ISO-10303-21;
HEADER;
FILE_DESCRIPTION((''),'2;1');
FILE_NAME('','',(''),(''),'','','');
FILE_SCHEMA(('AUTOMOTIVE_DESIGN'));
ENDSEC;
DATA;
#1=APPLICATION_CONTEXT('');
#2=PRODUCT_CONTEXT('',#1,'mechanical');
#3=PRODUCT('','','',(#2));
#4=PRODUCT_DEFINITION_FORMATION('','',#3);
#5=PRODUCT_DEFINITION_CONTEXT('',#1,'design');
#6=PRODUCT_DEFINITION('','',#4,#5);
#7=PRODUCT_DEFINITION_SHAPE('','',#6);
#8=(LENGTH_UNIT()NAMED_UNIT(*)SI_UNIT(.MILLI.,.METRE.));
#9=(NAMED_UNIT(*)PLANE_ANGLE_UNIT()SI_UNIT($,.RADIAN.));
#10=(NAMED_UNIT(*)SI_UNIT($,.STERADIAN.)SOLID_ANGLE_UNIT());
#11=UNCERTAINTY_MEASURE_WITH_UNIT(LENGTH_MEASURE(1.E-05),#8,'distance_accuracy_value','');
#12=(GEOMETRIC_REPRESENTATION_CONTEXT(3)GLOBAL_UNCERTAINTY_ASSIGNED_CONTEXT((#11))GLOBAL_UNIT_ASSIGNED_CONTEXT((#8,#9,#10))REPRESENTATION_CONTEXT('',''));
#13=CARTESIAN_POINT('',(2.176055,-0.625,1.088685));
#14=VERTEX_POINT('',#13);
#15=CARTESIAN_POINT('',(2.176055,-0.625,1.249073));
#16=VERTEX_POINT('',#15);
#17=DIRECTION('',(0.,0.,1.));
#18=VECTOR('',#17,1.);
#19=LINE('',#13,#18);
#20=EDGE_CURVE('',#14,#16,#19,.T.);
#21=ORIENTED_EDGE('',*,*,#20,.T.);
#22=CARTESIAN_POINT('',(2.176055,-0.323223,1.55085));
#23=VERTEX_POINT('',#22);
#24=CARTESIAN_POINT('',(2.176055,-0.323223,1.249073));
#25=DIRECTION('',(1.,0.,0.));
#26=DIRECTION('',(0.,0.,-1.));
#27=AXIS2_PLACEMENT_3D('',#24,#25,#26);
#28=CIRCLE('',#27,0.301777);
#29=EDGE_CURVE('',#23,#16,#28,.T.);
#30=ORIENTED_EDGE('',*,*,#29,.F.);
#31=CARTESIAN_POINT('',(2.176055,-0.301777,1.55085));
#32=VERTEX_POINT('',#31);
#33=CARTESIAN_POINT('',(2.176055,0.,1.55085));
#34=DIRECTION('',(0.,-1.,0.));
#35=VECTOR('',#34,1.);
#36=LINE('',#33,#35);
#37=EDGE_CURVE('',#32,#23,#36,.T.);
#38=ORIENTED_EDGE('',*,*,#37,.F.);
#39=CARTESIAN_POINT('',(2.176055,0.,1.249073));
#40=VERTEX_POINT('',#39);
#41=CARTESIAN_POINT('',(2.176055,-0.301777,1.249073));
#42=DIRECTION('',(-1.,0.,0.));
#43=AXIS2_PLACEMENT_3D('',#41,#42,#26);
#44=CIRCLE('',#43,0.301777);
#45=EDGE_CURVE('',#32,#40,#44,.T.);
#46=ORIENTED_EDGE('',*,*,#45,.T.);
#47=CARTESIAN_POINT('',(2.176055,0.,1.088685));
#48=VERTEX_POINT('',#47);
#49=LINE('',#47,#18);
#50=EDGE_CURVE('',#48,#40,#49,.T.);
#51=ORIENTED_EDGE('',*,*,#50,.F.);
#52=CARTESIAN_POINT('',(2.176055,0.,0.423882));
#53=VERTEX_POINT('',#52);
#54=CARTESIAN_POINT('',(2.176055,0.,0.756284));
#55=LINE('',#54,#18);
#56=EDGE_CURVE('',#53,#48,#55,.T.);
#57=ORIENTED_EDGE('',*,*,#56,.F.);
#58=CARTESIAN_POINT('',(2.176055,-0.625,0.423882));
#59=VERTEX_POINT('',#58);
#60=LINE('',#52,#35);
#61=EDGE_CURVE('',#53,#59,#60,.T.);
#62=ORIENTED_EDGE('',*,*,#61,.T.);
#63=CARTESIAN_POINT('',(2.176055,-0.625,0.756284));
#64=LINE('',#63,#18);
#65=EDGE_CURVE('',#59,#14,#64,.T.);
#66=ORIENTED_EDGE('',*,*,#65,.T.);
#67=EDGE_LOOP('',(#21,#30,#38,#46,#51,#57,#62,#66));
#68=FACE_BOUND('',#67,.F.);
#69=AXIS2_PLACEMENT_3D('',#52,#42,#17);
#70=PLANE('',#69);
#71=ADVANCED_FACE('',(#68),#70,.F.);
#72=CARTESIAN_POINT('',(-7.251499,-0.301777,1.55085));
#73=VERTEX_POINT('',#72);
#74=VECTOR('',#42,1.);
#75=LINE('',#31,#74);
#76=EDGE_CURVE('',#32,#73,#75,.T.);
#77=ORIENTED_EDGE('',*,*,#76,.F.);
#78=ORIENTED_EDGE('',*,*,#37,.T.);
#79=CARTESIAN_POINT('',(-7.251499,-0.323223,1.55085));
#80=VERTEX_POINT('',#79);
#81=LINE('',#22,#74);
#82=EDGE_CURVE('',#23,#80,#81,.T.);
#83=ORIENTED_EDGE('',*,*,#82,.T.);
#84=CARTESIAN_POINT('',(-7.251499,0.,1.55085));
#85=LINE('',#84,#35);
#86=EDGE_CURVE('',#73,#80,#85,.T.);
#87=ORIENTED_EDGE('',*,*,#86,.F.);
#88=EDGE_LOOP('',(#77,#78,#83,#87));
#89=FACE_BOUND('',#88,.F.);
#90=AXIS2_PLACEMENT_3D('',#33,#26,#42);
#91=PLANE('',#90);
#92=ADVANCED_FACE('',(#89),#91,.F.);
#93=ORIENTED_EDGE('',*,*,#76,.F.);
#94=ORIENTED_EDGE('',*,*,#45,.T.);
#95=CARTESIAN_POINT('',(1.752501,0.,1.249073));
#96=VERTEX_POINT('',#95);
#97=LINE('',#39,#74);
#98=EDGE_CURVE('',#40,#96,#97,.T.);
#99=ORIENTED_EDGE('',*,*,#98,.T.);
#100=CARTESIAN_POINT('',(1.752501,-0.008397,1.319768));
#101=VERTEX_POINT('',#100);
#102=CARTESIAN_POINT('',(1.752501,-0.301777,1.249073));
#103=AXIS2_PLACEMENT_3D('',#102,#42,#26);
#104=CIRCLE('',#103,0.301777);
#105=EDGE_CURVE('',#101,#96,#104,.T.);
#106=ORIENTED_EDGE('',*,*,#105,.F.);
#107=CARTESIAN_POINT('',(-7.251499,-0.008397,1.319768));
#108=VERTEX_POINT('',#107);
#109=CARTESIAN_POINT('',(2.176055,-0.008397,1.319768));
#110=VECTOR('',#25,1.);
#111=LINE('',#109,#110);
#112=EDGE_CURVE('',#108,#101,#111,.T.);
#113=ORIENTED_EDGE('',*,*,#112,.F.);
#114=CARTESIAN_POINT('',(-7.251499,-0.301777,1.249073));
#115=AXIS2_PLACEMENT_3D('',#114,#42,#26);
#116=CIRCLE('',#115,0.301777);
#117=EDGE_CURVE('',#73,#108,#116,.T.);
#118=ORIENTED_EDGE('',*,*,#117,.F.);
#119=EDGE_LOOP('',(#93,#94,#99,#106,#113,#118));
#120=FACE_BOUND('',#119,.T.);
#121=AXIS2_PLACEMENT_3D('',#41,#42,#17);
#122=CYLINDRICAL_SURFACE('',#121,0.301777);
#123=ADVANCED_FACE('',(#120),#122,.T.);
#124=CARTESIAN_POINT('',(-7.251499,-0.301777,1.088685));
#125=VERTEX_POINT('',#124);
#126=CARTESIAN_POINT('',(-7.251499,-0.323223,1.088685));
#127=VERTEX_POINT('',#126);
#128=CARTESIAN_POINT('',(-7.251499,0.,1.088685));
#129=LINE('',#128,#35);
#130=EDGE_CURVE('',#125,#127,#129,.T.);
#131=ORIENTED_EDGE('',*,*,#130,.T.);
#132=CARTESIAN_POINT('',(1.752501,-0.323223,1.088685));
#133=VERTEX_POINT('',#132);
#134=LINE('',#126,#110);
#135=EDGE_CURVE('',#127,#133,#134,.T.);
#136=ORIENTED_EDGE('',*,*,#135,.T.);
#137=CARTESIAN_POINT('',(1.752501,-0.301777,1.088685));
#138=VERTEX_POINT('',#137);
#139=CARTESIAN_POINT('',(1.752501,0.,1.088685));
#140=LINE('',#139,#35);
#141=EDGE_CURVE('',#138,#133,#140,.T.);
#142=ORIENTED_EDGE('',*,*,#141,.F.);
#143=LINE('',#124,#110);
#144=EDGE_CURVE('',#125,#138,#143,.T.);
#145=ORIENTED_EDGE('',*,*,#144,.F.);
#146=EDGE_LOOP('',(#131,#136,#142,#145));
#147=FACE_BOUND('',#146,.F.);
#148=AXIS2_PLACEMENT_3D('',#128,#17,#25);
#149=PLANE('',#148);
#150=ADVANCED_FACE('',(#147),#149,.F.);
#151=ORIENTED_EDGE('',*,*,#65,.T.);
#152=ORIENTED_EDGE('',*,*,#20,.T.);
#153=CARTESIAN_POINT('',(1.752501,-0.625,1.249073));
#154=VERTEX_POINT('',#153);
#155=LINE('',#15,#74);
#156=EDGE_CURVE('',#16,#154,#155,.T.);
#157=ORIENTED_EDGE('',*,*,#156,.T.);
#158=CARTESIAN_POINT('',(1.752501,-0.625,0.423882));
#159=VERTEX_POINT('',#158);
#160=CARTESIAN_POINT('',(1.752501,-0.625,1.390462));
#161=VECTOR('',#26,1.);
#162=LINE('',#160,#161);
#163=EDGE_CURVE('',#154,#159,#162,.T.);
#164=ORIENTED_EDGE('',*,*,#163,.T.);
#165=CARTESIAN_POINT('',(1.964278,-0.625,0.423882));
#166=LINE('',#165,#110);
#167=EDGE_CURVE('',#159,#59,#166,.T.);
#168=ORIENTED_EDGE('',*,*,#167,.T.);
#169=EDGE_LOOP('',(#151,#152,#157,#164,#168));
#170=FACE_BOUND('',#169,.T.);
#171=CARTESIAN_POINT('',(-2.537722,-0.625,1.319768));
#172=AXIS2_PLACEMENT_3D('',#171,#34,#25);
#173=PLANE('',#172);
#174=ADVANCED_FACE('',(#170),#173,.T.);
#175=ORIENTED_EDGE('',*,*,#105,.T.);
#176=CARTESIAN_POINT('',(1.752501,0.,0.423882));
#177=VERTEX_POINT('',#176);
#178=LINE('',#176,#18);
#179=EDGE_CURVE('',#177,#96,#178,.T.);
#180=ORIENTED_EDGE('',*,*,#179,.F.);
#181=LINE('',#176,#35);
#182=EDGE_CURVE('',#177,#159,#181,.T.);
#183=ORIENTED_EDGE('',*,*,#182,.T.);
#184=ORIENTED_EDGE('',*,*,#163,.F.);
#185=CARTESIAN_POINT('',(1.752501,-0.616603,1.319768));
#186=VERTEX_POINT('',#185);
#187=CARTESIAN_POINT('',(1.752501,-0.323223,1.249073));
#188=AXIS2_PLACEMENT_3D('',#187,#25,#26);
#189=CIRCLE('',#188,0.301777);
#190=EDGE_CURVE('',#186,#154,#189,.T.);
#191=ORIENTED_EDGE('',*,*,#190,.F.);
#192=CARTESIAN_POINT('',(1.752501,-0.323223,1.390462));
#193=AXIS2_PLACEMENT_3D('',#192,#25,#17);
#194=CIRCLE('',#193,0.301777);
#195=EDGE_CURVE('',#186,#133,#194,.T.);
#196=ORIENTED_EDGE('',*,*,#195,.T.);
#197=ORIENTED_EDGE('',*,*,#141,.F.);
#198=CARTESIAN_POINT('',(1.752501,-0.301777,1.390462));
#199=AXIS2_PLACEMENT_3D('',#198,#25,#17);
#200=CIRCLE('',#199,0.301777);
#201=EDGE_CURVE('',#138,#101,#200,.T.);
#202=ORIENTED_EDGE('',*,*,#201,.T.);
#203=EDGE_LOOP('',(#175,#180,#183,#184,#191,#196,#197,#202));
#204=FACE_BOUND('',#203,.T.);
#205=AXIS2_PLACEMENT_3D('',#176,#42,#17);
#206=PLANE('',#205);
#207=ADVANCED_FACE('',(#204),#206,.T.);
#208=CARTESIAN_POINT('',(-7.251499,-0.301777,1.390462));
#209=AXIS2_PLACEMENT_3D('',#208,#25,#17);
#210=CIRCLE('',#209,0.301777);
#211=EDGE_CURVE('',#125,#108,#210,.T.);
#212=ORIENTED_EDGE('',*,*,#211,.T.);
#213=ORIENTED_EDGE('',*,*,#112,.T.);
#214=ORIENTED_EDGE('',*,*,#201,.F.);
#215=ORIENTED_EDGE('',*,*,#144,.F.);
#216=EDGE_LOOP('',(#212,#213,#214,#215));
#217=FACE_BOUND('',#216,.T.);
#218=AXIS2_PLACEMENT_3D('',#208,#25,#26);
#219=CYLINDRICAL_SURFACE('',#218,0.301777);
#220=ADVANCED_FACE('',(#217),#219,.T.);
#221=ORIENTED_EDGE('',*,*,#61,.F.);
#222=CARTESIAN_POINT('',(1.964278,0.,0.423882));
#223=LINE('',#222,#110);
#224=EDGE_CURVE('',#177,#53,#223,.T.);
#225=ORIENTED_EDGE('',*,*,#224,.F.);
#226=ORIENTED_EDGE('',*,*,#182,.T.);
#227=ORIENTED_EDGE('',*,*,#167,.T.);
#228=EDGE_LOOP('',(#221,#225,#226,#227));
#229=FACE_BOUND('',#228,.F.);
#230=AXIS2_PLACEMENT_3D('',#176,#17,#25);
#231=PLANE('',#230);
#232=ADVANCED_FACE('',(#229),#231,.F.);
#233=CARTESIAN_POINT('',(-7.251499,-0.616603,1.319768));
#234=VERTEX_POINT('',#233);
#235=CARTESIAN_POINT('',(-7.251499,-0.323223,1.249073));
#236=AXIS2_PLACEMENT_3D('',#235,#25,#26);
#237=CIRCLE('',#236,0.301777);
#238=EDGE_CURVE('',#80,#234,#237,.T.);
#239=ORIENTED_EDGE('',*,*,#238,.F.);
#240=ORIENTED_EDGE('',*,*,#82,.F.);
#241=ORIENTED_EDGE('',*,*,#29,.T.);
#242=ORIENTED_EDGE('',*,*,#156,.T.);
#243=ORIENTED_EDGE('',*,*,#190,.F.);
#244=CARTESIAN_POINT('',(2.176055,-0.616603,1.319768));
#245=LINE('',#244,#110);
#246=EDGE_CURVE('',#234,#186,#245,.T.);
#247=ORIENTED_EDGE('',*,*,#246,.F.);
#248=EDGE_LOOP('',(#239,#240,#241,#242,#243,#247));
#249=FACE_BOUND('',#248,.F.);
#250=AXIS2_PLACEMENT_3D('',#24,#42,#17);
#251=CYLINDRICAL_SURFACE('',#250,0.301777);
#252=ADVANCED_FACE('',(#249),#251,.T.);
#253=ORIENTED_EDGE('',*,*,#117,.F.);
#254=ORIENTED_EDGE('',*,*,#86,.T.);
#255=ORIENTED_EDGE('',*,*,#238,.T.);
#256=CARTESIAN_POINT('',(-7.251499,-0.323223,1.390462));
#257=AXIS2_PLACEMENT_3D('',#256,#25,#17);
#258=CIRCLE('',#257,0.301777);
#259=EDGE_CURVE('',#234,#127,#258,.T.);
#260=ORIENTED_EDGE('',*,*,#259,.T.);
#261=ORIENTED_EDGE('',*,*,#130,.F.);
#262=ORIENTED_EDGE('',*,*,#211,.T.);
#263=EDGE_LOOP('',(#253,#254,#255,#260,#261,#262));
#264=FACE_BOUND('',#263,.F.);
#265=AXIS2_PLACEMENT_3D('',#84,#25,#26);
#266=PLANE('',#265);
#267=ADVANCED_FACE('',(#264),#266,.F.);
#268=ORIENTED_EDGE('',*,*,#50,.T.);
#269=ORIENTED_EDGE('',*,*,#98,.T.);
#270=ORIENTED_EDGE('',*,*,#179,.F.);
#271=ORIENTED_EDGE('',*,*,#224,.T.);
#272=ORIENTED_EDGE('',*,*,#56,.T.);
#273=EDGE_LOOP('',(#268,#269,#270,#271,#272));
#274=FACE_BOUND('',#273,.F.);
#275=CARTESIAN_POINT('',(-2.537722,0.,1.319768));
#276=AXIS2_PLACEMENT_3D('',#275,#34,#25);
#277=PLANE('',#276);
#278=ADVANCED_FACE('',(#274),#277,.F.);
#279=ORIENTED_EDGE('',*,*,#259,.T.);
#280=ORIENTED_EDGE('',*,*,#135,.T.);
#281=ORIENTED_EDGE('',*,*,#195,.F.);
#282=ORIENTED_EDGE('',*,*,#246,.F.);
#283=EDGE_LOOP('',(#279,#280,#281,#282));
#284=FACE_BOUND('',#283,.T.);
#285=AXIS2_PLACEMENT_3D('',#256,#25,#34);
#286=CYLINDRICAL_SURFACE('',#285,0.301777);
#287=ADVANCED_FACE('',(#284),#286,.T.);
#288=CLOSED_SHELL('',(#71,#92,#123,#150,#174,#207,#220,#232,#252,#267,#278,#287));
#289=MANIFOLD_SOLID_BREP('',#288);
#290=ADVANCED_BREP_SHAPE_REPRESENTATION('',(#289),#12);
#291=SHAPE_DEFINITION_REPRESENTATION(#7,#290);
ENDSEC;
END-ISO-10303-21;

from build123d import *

# Parameters (mm, degrees)
F0_W     = 3.3884318545
F0_H     = 5.3184241988
F1_DEPTH = 5
F2_F1_R  = 2.4142135624
F2_F2_R  = 2.4142135624
F2_F3_R  = 2.4142135624
F2_F4_R  = 2.4142135624
F3_SCALE = 0.125


with BuildPart() as f1:
    # F0 (on Front) → F1 (new body)
    with BuildSketch(Plane.XZ):
        Polygon((17.4084361643, 12.4068003497), (-58.0119900405, 12.4068003497), (-58.0119900405, 8.7094834889), (14.0200043097, 8.7094834889), (17.4084361643, 8.7094834889), align=None)
        with Locations((15.714220237, 6.0502713895)):
            Rectangle(F0_W, F0_H)
    extrude(amount=F1_DEPTH)

    # F2: fillet of radius 2.4142135624 on 4 edges, made by hand

    # F2_f1
    f2_f1_edges = [f1.edges().sort_by_distance(p)[0] for p in [
        (-21.9959928654, 0, 8.7094834889),
    ]]
    fillet(f2_f1_edges, radius=F2_F1_R)

    # F2_f2
    f2_f2_edges = [f1.edges().sort_by_distance(p)[0] for p in [
        (-21.9959928654, -5, 8.7094834889),
    ]]
    fillet(f2_f2_edges, radius=F2_F2_R)

    # F2_f3
    f2_f3_edges = [f1.edges().sort_by_distance(p)[0] for p in [
        (-20.3017769381, 0, 12.4068003497),
    ]]
    fillet(f2_f3_edges, radius=F2_F3_R)

    # F2_f4
    f2_f4_edges = [f1.edges().sort_by_distance(p)[0] for p in [
        (-20.3017769381, -5, 12.4068003497),
    ]]
    fillet(f2_f4_edges, radius=F2_F4_R)


with BuildPart() as f1_1:
    # F3: moved
    add(f1.part.scale(F3_SCALE))


solid = f1_1.part
